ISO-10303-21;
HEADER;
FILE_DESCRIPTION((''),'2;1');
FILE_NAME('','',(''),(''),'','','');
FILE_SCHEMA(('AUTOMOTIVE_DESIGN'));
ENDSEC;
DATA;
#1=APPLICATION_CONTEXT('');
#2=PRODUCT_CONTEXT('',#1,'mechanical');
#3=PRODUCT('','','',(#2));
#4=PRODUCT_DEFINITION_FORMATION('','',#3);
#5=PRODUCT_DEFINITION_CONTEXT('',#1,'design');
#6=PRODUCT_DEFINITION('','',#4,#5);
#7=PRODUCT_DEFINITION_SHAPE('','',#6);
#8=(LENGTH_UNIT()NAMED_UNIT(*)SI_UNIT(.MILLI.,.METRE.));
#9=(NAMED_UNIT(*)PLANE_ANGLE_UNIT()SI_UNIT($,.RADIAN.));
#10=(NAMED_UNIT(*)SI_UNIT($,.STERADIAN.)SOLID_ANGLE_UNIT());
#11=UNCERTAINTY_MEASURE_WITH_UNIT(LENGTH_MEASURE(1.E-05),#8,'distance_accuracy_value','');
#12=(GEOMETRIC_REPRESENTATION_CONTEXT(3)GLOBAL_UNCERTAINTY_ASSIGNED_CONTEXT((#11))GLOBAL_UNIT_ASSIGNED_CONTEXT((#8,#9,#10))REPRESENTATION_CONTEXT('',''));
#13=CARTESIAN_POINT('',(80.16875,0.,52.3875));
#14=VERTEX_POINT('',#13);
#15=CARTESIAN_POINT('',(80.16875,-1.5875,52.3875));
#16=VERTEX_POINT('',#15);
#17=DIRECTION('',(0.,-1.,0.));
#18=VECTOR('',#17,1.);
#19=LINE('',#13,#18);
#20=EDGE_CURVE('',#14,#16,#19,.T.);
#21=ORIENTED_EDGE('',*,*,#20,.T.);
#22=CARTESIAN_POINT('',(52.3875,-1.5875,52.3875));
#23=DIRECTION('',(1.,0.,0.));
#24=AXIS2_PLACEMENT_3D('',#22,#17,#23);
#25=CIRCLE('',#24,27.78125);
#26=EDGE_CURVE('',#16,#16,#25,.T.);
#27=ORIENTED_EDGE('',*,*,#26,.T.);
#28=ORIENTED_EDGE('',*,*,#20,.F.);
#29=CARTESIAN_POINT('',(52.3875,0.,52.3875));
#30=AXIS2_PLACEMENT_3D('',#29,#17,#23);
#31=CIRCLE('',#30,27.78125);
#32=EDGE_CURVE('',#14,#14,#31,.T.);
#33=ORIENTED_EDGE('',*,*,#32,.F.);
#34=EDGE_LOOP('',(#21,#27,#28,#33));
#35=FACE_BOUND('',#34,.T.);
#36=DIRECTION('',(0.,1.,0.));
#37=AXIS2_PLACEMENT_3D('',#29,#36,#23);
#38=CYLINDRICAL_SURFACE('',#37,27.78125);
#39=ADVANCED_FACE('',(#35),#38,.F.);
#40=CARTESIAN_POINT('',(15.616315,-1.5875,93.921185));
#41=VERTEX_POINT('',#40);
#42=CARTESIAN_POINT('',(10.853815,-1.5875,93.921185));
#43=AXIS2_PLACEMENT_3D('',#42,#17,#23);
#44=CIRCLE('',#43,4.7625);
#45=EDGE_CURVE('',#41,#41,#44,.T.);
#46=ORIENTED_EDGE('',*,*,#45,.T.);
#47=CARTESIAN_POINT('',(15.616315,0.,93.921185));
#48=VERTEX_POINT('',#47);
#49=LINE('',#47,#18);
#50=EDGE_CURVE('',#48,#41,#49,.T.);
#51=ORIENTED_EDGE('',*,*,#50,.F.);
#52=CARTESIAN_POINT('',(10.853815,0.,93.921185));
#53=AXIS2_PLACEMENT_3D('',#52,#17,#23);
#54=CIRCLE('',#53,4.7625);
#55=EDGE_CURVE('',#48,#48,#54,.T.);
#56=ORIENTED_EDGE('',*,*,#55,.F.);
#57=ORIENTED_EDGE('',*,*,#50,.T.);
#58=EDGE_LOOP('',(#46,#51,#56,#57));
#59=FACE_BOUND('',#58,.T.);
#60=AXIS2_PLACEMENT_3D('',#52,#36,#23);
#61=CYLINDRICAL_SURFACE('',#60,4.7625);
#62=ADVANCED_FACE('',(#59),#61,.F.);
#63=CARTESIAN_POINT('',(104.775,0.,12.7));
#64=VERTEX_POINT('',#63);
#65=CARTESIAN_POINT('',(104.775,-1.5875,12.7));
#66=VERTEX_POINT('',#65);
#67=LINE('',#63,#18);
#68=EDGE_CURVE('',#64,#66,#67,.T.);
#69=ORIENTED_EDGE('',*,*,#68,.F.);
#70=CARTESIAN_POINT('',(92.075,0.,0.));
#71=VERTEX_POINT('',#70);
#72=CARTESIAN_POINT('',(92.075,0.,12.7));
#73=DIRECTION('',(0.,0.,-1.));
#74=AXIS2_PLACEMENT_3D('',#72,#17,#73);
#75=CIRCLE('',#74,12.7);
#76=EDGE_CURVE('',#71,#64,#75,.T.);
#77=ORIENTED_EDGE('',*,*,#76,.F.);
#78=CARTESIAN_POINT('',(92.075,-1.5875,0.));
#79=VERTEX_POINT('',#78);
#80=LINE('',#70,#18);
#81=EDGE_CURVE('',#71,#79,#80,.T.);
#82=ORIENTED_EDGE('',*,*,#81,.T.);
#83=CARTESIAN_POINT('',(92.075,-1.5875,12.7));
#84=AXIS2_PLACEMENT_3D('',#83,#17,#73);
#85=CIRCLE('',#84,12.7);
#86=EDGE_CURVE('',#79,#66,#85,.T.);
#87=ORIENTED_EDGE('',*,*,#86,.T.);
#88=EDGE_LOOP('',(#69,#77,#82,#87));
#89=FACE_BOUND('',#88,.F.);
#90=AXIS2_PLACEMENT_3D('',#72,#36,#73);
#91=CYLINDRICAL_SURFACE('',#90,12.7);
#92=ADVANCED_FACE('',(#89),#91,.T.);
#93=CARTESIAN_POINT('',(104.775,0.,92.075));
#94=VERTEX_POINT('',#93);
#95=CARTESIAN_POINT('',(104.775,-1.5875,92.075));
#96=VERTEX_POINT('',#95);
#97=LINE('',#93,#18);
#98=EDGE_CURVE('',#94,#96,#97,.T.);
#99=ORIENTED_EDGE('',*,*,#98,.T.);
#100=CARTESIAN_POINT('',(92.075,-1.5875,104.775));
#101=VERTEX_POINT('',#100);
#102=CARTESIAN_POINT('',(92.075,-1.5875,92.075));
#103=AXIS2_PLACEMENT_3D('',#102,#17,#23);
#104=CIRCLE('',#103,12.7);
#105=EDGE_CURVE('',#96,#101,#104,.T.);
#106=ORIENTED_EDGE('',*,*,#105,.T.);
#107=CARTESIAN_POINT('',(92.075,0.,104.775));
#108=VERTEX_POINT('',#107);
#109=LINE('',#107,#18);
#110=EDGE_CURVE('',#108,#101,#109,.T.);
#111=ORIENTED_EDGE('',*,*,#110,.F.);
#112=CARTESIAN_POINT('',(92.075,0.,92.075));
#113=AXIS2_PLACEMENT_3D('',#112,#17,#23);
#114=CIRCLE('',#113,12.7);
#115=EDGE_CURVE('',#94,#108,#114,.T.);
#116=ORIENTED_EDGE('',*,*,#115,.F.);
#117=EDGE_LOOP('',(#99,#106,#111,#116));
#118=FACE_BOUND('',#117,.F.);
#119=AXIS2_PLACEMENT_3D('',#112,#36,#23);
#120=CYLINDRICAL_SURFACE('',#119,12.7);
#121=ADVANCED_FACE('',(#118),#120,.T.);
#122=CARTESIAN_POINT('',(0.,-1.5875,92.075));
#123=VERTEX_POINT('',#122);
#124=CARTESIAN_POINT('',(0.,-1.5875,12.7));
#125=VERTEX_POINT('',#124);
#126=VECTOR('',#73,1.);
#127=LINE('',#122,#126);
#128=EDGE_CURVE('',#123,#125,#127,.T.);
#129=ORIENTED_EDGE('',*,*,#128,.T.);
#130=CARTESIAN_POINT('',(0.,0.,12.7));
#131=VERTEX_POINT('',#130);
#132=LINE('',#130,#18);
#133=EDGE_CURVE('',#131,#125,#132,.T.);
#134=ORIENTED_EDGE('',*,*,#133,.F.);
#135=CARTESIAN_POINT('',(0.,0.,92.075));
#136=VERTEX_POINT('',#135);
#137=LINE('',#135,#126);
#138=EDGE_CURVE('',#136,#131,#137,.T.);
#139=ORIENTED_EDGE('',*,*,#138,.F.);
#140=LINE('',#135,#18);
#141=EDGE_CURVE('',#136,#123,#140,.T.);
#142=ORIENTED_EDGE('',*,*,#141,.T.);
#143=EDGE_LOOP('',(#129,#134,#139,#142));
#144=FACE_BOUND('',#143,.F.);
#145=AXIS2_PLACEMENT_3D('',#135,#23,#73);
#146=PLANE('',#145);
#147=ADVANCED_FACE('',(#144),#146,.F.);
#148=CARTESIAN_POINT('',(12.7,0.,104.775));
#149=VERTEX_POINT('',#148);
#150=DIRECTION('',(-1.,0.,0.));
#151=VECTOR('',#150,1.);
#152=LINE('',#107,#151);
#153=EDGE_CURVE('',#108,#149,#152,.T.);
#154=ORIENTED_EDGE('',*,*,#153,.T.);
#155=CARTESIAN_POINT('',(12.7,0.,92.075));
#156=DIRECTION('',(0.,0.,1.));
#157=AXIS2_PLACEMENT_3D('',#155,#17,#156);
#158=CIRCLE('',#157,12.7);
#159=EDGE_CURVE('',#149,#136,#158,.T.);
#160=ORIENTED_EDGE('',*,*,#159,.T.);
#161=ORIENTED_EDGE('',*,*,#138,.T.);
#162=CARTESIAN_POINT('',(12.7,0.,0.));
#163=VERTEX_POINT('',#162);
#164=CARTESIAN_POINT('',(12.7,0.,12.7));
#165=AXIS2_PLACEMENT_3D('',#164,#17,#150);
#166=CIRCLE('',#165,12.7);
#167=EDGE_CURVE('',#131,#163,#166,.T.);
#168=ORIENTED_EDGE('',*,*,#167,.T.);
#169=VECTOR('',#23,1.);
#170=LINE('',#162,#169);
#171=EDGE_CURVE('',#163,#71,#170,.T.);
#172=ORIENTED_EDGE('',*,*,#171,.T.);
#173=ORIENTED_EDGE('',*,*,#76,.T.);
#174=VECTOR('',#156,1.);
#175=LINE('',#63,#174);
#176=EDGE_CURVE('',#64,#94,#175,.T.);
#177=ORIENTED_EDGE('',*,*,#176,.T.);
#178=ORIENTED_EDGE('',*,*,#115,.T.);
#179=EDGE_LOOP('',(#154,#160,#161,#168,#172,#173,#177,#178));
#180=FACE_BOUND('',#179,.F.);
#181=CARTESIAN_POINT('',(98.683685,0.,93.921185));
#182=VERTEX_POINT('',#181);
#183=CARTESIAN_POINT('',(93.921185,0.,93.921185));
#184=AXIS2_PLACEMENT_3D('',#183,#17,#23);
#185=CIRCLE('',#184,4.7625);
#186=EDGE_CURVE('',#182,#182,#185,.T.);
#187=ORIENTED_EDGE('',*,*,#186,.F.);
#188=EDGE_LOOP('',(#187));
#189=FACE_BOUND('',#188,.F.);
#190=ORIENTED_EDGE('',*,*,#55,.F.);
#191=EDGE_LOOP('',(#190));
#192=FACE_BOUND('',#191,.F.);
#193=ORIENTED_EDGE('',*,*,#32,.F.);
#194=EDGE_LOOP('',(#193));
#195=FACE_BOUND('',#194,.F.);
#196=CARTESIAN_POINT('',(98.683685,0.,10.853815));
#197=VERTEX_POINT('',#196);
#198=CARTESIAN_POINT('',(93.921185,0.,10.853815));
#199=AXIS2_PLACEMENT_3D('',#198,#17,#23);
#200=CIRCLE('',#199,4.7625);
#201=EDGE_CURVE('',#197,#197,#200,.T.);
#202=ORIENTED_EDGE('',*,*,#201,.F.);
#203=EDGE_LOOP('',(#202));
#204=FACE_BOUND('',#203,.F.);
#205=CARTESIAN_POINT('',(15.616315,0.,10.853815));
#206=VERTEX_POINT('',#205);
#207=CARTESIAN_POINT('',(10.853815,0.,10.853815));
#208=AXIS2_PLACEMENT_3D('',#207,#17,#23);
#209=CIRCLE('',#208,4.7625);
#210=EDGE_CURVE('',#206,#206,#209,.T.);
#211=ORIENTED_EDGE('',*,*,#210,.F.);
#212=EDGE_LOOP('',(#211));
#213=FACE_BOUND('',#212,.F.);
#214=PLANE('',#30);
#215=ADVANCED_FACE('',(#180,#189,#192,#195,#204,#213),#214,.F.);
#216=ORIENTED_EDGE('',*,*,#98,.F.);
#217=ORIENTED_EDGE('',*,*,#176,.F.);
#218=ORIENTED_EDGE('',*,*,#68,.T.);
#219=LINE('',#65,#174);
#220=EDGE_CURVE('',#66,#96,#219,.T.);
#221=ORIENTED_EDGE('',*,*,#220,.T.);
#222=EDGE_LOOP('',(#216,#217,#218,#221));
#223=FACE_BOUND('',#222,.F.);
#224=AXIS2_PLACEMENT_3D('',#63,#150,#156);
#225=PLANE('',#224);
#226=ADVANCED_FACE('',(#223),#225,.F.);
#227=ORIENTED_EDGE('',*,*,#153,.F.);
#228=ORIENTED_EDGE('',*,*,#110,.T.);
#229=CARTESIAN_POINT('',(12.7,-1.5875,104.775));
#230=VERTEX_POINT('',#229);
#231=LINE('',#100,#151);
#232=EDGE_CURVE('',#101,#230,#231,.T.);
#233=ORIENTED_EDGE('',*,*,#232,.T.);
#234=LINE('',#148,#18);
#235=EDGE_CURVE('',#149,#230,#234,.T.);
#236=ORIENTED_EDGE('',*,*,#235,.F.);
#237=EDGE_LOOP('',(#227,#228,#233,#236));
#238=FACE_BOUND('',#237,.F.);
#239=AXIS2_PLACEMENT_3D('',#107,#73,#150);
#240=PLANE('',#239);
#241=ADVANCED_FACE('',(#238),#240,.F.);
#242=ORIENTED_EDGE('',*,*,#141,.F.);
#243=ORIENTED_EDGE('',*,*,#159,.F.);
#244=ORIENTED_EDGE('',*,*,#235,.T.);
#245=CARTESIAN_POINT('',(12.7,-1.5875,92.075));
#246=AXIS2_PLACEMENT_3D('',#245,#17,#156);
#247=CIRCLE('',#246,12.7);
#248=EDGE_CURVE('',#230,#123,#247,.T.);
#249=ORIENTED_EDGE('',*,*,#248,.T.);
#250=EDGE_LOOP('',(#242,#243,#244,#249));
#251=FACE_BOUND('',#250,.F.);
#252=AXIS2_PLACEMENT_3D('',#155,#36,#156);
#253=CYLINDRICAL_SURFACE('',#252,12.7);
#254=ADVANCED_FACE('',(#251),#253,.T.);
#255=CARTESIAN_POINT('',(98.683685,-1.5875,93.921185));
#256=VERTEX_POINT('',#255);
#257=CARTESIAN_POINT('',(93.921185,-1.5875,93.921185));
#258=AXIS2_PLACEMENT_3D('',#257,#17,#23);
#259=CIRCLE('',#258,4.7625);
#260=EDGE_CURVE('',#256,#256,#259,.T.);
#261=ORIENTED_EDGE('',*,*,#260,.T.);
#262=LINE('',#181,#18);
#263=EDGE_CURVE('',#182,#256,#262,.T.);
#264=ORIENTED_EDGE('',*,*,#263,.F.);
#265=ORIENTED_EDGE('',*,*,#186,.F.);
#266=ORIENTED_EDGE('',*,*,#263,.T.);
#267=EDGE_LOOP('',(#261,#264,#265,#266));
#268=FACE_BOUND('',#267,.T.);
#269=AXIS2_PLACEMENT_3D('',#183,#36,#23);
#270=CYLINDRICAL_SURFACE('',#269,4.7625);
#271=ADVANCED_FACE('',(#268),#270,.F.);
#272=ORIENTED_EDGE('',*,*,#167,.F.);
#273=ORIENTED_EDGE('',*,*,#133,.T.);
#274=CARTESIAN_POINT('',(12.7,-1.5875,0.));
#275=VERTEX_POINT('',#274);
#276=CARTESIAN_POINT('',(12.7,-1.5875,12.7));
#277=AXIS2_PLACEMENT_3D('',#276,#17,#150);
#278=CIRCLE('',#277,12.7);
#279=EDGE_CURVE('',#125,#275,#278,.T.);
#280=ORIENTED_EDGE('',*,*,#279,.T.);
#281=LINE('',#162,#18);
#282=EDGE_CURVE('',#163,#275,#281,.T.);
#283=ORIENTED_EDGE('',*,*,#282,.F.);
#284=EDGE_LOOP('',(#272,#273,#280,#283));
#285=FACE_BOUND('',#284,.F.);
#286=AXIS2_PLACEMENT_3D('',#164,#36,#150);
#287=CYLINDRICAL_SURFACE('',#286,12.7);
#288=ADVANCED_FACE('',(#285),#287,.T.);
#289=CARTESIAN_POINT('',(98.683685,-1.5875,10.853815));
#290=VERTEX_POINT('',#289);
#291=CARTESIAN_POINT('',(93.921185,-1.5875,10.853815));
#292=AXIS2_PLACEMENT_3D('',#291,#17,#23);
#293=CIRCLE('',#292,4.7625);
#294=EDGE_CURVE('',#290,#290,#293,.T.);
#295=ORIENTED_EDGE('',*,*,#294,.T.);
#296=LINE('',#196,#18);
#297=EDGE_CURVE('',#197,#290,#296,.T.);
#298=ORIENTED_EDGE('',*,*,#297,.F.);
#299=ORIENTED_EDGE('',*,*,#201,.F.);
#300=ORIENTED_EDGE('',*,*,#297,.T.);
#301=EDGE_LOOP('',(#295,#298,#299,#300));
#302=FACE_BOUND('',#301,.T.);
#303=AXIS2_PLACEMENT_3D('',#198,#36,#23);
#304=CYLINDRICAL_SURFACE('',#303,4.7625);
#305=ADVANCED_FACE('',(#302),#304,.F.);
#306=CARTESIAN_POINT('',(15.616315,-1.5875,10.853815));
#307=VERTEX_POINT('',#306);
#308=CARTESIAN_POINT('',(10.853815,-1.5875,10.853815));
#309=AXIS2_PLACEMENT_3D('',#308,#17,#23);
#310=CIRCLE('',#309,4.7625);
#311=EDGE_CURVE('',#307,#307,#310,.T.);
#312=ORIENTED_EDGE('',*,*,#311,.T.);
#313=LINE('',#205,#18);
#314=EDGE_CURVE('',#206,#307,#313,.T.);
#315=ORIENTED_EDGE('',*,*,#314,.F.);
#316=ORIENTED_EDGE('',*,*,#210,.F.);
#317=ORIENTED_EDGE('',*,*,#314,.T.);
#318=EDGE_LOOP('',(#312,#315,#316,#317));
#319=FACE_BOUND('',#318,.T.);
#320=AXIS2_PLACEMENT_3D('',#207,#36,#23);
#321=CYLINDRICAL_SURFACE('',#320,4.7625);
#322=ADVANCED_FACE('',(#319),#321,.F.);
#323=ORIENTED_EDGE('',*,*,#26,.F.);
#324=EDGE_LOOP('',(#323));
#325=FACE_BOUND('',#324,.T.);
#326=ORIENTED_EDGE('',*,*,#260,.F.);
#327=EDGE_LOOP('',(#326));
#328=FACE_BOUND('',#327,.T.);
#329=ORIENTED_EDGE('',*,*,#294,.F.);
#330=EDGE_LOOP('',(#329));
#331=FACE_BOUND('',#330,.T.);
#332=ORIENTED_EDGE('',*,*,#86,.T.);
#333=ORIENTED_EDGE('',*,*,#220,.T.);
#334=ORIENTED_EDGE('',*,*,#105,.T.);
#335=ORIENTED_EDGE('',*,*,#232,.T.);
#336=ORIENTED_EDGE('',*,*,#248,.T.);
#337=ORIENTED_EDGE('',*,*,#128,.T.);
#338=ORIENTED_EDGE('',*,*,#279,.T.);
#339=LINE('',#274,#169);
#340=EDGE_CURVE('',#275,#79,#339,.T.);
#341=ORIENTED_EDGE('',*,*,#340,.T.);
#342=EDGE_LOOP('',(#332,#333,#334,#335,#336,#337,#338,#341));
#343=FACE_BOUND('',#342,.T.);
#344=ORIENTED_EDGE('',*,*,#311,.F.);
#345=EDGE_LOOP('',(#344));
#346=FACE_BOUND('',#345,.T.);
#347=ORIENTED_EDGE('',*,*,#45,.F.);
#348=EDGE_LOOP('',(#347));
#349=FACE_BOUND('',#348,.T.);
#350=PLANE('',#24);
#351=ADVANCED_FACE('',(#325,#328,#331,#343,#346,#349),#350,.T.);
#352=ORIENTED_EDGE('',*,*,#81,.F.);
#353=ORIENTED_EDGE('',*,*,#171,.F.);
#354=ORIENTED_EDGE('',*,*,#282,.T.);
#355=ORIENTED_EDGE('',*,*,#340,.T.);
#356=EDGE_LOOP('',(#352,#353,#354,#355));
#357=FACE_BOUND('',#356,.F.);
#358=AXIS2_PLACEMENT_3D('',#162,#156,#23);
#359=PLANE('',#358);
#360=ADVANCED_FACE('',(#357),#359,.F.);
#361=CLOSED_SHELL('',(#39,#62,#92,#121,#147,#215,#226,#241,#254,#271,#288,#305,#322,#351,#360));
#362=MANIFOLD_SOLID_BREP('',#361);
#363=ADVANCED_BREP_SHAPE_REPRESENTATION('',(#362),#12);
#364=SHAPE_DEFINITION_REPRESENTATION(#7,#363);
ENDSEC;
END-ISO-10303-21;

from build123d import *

# Parameters (mm, degrees)
F0_R     = 4.7625
F0_R_2   = 27.78125
F1_DEPTH = 1.5875


# Not quite as in the source:
# - a length typed as a fraction of an inch, garbled in the dataset ("3 / 203.2 mm" for 3/8 in), is restored


with BuildPart() as f1:
    # F0 (on Front) → F1 (new body)
    with BuildSketch(Plane.XZ):
        with BuildLine():
            ThreePointArc((0, 12.7), (3.7197438789, 3.7197438789), (12.7, 0))
            Line((12.7, 0), (92.075, 0))
            ThreePointArc((92.075, 0), (101.0552561211, 3.7197438789), (104.775, 12.7))
            Line((104.775, 12.7), (104.775, 92.075))
            ThreePointArc((104.775, 92.075), (101.0552561211, 101.0552561211), (92.075, 104.775))
            Line((92.075, 104.775), (12.7, 104.775))
            ThreePointArc((12.7, 104.775), (3.7197438789, 101.0552561211), (0, 92.075))
            Line((0, 92.075), (0, 12.7))
        make_face()
        with Locations((10.8538154401, 10.8538154401)):
            Circle(F0_R, mode=Mode.SUBTRACT)
        with Locations((93.9211845599, 10.8538154401)):
            Circle(F0_R, mode=Mode.SUBTRACT)
        with Locations((10.8538154401, 93.9211845599)):
            Circle(F0_R, mode=Mode.SUBTRACT)
        with Locations((52.3875, 52.3875)):
            Circle(F0_R_2, mode=Mode.SUBTRACT)
        with Locations((93.9211845599, 93.9211845599)):
            Circle(F0_R, mode=Mode.SUBTRACT)
    extrude(amount=F1_DEPTH)


solid = f1.part
